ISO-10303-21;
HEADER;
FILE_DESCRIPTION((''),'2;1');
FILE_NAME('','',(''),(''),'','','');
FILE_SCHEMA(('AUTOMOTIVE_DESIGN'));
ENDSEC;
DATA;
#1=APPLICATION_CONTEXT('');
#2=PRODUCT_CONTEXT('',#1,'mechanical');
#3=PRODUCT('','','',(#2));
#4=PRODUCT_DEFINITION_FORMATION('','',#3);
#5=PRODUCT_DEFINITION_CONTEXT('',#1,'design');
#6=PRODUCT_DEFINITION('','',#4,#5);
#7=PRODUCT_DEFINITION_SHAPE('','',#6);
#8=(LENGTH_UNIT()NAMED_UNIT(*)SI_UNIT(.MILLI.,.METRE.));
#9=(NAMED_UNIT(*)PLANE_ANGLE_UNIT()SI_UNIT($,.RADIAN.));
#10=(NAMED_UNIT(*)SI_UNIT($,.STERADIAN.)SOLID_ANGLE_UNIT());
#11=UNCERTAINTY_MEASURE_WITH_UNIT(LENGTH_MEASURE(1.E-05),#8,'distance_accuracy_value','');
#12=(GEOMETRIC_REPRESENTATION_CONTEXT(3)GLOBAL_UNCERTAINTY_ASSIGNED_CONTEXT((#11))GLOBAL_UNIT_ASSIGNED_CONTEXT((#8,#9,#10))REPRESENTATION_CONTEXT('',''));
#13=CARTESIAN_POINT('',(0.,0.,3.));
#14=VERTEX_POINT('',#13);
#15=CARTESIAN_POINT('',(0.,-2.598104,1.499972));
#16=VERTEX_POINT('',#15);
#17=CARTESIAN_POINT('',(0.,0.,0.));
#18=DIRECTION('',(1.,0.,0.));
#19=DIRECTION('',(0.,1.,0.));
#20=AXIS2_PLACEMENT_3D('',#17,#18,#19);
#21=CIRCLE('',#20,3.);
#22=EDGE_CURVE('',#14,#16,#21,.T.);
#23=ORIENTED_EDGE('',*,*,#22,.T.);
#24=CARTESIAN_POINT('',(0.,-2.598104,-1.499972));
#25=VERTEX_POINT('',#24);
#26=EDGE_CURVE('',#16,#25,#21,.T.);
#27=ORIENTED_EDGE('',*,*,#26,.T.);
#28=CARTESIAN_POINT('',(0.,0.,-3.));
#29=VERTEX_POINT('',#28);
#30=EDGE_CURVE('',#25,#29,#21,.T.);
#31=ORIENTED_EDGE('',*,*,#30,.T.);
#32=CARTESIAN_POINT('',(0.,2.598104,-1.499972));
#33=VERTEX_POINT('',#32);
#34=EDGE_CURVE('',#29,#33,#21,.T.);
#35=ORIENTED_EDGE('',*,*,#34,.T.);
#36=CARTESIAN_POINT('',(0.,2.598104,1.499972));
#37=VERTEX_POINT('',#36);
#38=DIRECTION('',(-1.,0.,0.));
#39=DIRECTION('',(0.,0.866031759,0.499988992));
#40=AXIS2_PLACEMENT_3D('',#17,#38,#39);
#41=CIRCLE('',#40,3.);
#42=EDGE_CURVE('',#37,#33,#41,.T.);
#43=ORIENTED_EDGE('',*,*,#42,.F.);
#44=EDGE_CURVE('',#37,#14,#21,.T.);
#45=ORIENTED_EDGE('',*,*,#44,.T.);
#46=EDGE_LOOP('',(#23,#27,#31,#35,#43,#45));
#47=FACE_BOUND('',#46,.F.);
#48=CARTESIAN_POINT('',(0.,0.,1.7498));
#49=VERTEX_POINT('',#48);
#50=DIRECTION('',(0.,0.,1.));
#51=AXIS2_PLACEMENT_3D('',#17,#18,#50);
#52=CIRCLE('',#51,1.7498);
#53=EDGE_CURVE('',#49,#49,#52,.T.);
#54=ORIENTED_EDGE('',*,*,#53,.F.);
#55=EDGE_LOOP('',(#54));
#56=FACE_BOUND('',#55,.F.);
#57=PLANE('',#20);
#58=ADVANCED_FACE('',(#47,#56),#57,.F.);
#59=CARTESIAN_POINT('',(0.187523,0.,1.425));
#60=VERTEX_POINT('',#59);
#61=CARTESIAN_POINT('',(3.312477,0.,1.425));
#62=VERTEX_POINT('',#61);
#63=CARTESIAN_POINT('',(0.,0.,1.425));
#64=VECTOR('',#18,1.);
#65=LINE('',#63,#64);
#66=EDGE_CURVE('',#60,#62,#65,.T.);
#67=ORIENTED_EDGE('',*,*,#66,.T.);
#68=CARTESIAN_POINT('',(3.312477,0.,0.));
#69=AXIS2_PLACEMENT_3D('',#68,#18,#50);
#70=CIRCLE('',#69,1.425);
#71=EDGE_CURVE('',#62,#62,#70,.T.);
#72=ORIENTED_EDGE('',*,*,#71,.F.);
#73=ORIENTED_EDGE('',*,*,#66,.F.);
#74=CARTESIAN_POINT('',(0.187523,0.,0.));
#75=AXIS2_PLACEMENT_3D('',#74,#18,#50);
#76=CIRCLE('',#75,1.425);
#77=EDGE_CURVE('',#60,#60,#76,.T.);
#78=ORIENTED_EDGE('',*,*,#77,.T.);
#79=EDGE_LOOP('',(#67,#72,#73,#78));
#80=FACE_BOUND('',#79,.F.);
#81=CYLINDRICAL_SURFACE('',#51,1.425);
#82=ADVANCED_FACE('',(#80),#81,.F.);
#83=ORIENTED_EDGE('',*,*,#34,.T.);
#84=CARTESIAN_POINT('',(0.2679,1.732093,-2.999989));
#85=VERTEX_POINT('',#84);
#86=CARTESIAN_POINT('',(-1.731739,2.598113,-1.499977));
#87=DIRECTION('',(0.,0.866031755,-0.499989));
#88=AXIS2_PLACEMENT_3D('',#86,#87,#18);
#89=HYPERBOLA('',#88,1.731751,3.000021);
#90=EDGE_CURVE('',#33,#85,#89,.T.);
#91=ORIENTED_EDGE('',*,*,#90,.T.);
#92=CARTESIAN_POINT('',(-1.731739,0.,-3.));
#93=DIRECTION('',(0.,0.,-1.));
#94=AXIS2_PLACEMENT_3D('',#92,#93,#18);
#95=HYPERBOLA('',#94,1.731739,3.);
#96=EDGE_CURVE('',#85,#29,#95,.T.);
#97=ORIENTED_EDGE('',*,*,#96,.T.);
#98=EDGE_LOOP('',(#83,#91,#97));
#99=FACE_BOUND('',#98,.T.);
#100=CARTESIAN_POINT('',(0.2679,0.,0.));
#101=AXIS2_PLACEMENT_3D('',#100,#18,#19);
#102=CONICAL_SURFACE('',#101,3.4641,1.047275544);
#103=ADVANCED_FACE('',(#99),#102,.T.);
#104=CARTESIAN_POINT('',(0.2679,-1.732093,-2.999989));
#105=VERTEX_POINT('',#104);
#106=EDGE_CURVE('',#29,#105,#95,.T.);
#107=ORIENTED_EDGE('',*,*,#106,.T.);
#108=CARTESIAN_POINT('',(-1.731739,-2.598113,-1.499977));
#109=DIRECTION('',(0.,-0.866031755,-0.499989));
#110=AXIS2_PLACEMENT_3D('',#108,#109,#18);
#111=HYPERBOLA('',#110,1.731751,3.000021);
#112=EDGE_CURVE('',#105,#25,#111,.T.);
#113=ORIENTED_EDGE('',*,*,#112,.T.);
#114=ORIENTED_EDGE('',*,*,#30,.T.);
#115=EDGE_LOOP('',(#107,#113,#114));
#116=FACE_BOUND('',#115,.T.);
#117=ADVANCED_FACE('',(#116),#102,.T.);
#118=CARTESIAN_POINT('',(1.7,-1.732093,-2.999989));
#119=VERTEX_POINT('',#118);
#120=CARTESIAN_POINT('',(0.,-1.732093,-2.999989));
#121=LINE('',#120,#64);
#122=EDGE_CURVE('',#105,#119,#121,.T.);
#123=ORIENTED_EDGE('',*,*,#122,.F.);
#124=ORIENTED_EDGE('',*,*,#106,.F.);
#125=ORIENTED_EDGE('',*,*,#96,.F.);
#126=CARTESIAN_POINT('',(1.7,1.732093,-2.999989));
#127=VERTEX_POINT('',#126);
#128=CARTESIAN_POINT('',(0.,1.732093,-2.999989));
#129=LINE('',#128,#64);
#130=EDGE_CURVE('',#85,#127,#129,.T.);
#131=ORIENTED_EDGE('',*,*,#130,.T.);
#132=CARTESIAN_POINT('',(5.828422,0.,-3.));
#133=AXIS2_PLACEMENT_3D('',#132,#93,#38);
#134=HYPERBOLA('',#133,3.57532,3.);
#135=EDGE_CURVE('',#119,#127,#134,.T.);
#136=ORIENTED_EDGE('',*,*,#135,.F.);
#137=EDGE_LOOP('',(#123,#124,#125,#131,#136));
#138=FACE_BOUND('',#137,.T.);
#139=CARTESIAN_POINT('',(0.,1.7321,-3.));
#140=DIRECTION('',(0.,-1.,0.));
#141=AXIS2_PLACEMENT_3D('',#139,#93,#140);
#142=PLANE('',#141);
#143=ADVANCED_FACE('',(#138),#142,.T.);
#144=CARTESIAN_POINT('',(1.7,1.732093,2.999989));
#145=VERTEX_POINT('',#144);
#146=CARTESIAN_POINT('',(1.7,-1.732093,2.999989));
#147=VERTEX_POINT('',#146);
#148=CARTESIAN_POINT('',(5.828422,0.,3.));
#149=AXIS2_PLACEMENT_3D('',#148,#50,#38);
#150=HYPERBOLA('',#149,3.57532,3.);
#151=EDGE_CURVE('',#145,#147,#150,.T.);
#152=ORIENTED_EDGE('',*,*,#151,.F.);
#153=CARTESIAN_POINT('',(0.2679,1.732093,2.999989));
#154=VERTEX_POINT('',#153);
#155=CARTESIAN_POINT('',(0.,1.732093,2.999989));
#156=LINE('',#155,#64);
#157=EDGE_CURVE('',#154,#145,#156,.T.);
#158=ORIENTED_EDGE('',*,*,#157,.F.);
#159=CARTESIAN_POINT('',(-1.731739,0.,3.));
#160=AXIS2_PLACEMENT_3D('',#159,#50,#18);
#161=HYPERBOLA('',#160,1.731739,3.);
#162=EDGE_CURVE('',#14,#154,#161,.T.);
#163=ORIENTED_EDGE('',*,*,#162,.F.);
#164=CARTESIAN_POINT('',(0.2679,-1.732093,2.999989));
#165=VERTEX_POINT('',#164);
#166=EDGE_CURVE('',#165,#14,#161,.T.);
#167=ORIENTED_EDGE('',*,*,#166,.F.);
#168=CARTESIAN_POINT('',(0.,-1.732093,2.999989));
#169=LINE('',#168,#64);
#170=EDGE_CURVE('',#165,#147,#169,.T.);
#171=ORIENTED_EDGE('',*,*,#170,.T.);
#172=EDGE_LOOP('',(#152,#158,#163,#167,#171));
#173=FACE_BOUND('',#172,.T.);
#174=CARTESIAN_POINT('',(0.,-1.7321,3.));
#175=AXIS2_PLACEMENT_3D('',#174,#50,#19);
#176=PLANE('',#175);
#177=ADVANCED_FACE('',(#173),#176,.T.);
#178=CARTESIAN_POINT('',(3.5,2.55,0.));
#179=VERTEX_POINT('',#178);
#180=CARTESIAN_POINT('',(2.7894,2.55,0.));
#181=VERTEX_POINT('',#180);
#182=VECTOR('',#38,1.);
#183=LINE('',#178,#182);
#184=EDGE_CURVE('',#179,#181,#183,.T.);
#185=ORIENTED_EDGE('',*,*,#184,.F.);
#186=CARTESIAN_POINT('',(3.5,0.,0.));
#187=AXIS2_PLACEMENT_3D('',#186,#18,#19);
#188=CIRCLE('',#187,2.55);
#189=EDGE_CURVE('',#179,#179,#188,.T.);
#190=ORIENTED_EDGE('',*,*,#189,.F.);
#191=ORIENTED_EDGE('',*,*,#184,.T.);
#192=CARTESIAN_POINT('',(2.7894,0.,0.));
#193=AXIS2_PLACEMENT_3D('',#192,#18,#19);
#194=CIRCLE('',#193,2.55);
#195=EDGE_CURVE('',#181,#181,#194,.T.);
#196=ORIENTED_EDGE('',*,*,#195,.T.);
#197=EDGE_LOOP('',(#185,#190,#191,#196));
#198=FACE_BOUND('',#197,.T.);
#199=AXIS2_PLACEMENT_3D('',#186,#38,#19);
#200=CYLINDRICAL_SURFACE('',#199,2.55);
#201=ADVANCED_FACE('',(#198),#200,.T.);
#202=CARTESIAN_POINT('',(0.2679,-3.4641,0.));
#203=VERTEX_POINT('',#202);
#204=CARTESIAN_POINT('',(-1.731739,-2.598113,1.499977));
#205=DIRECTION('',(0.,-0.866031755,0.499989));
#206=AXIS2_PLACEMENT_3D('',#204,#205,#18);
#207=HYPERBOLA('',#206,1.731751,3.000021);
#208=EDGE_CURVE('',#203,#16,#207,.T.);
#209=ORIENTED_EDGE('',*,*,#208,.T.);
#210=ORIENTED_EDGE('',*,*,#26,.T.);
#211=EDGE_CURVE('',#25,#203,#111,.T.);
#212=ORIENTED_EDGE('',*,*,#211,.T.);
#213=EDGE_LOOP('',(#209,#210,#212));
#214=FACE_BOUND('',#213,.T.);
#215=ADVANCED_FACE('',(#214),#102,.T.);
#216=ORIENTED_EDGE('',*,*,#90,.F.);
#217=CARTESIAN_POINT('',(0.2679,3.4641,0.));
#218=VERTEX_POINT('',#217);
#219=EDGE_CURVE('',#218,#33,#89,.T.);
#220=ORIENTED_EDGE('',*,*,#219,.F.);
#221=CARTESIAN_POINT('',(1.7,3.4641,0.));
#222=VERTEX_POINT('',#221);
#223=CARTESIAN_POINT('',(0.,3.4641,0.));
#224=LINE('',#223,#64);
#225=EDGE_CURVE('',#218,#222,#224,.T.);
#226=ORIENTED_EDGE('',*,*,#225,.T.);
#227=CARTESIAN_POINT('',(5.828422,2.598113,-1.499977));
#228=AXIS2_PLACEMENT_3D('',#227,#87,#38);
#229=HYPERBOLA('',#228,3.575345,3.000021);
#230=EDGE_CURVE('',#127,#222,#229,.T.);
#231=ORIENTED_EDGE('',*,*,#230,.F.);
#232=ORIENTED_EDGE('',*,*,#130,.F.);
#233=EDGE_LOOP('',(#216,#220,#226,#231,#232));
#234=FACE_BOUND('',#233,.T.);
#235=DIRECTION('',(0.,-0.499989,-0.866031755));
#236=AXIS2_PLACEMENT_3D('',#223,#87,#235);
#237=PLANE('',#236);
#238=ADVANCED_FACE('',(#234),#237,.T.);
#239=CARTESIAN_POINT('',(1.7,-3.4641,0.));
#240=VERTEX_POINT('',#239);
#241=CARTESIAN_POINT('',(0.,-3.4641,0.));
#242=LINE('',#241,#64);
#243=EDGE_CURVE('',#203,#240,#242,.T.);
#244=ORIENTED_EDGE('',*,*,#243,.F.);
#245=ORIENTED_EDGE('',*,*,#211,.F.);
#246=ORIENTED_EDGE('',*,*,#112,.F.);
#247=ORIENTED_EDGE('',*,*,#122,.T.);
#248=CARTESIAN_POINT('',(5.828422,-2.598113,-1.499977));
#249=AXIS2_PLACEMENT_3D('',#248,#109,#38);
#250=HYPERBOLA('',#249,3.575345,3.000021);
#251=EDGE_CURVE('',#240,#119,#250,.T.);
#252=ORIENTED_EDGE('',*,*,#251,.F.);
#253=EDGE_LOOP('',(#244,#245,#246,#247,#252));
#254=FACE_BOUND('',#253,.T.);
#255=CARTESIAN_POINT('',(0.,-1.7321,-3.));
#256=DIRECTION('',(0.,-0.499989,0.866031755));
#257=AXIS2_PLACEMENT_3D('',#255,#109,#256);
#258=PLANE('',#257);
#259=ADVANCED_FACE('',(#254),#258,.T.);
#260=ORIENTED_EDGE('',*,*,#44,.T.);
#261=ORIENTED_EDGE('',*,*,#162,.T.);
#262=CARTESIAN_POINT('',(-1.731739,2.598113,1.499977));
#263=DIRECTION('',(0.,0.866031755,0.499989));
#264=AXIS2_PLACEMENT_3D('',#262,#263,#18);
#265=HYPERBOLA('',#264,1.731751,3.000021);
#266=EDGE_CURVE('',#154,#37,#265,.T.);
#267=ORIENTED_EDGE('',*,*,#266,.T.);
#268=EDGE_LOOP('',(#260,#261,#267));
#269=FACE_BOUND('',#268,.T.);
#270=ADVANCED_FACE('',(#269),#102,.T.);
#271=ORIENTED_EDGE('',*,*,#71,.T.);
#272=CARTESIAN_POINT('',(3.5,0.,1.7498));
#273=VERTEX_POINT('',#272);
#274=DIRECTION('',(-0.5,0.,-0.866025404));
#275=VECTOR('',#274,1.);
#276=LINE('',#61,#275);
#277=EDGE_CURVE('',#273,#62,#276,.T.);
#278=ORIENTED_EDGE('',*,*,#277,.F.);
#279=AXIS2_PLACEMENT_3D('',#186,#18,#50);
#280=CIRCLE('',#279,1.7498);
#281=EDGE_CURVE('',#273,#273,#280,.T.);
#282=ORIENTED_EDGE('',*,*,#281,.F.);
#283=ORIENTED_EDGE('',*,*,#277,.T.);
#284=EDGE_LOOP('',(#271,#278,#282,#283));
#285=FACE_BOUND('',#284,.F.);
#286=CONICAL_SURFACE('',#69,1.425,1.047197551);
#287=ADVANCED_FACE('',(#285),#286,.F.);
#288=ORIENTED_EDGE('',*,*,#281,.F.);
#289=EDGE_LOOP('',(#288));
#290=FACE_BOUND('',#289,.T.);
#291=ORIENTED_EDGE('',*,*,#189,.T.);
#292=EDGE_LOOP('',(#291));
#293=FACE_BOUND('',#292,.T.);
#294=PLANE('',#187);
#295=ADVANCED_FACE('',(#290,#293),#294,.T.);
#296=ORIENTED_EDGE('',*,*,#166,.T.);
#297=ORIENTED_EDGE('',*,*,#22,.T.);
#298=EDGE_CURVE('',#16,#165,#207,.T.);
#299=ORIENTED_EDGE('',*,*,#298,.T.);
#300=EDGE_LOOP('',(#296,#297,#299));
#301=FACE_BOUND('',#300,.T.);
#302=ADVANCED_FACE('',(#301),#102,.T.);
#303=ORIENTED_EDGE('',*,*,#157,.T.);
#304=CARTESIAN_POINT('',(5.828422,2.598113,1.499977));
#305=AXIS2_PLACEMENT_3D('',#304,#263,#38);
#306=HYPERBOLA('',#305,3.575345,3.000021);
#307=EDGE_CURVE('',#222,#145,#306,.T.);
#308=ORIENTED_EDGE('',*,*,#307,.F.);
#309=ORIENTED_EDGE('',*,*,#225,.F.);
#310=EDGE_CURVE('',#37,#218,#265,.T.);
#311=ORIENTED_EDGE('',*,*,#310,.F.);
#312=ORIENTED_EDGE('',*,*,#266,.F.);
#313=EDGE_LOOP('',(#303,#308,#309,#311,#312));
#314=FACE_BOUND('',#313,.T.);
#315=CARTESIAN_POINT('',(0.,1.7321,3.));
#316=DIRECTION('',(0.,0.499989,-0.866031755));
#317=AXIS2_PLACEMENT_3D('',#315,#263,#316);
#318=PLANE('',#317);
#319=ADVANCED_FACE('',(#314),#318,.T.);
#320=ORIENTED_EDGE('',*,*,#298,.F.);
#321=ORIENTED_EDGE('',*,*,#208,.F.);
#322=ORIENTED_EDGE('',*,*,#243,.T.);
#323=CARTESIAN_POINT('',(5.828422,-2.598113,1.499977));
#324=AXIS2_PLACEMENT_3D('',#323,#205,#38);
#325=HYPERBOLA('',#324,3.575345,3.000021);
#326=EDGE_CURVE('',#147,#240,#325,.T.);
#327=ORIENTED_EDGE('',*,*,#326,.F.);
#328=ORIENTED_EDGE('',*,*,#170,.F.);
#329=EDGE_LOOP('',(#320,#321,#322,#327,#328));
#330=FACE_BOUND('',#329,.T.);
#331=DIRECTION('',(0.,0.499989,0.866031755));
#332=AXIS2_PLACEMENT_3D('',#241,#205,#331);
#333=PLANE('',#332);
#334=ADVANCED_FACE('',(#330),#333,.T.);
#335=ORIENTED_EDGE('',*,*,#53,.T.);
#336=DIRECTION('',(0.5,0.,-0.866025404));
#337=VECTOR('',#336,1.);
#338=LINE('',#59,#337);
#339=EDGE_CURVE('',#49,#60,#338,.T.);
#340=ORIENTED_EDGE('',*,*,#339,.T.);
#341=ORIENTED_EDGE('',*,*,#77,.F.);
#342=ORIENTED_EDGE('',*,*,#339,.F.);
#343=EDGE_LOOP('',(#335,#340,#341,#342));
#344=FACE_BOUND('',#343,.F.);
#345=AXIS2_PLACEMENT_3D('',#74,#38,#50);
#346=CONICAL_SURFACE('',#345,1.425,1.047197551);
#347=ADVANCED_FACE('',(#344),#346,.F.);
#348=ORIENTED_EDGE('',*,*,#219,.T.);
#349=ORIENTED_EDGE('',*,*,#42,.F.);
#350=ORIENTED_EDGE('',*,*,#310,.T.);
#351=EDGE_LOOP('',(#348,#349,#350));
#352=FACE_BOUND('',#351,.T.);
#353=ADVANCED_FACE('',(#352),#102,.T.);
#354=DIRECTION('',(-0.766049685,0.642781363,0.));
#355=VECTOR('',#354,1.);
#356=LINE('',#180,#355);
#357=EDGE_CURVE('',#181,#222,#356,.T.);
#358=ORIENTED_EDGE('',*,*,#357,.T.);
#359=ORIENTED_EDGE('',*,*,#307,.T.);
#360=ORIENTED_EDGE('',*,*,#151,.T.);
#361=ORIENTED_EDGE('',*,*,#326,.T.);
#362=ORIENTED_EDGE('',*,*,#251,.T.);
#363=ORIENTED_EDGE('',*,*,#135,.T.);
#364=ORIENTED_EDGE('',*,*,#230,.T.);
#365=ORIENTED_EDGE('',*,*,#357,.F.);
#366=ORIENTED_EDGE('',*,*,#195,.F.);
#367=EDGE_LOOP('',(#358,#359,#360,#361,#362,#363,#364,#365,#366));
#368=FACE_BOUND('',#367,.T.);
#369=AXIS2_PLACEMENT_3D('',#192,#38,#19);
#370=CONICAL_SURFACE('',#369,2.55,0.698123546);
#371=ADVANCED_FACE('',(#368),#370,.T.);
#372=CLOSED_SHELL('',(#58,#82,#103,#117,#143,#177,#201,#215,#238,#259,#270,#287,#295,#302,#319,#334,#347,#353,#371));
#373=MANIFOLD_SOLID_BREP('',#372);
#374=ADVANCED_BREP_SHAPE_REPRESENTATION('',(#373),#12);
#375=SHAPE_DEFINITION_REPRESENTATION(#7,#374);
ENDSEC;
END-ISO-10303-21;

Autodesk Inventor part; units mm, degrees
ref_plane "YZ Plane" through (0, 0, 0) normal (1, 0, 0) x (0, 1, 0)
ref_plane "XZ Plane" through (0, 0, 0) normal (0, 1, 0) x (-1, 0, 0)
sketch "Esquisse1" plane through (0, 0, 0) normal (1, 0, 0) x (0, 1, 0)
  line L0 (-3.4641, 0) -> (-1.7321, 3)
  line L1 (-1.7321, 3) -> (1.7321, 3)
  line L2 (1.7321, 3) -> (3.4641, 0)
  line L3 (3.4641, 0) -> (1.7321, -3)
  line L4 (1.7321, -3) -> (-1.7321, -3)
  line L5 (-1.7321, -3) -> (-3.4641, 0)
  point P0 (0, 0)
  point P1 (0, 0)
  dimension "d0" = 6.9282
extrude "Corps" add sketch "Esquisse1" along normal blind 3.5
sketch "Esquisse2" plane through (0, 0, 0) normal (-1, 0, 0) x (0, 0, 1)
  line L0 (0, -4.8497) -> (0, 4.8497) projected
  line L1 (-4.2, 0) -> (4.2, 0) projected
  point P0 (0, 0)
hole "Filetage" at (0, 0, 0) direction (1, 0, 0) diameter 2.85 end through all thread size "M3.5x0.6" class "6H" standard "ANSI Metric M Profile"
chamfer "Chanfrein1" distance 0.3248 angle 30 1 edges at (0, 0, -1.425) measured on face at (0, -2.123, -1.2698)
chamfer "Chanfrein2" distance 0.3248 angle 30 1 edges at (3.5, 0, -1.425) measured on face at (3.5, -2.123, -1.2698)
sketch "Esquisse3" plane through (0, 0, 0) normal (0, 0, 1) x (1, 0, 0)
  line L0 (0, 1.7321) -> (0, 3.4641) projected
  line L1 (0, 3.4641) -> (3.5, 3.4641) projected
  line L2 (3.5, 1.7321) -> (3.5, 3.4641) projected
  line L3 (-0.7, 0) -> (4.2, 0) projected
  line L4 (0.2679, 3.4641) -> (0, 3)
  line L5 (3.5, 2.55) -> (2.7894, 2.55)
  line L6 (2.7894, 2.55) -> (1.7, 3.4641)
  dimension "d3" = 30
  dimension "d5" = 6
  dimension "d6" = 5.1
  dimension "d8" = 50
  dimension "d9" = 1.7
revolve "Chanfrein3" cut sketch "Esquisse3" angle 360 about axis through (-10, 0, 0) along (1, 0, 0)
ref_plane "Work Plane1" through (9.8107, 0, 0) normal (0, 0, 1) x (-1, 0, 0)
equation "\"d0\" = 1.1547 * SW"
equation "\"d1\" = KOH"
equation "\"d3\" = ANG1"
equation "\"d5\" = SW0"
equation "\"d6\" = SW1"
equation "\"d8\" = ANG2"
equation "\"d9\" = KOH1"
equation "\"d10\" = -0.5 * GD1 + 0.5 * NND"
equation "\"d39\" = -0.5 * GD1 + 0.5 * NND"
equation "\"d12\" = -0.5 * GD1 + 0.5 * NND"
equation "\"d40\" = -0.5 * GD1 + 0.5 * NND"
equation "\"ANG1\" = 30deg"
equation "\"ANG2\" = 50deg"
equation "\"NND\" = 3.5"
equation "\"KOH\" = 3.5"
equation "\"SW\" = 6"
equation "\"SW0\" = SW"
equation "\"SW1\" = 0.85 * SW"
equation "\"KOH1\" = 1.7"
equation "\"GUL\" = 0.541266 * PTC"
equation "\"THREADDIA\" = 3.5"
equation "\"TOA\" = 30deg"
equation "\"PTC\" = 0.6"
equation "\"E0\" = 1.155 * SW"
equation "\"GAL\" = 0.541266 * PTC"
equation "\"GD1\" = 2.850481"
properties part number "ANSI B18.16.3M - Property Class 5 and 10 - Metric M3.5 x 0.6 Type de métal" material "Acier, doux"
